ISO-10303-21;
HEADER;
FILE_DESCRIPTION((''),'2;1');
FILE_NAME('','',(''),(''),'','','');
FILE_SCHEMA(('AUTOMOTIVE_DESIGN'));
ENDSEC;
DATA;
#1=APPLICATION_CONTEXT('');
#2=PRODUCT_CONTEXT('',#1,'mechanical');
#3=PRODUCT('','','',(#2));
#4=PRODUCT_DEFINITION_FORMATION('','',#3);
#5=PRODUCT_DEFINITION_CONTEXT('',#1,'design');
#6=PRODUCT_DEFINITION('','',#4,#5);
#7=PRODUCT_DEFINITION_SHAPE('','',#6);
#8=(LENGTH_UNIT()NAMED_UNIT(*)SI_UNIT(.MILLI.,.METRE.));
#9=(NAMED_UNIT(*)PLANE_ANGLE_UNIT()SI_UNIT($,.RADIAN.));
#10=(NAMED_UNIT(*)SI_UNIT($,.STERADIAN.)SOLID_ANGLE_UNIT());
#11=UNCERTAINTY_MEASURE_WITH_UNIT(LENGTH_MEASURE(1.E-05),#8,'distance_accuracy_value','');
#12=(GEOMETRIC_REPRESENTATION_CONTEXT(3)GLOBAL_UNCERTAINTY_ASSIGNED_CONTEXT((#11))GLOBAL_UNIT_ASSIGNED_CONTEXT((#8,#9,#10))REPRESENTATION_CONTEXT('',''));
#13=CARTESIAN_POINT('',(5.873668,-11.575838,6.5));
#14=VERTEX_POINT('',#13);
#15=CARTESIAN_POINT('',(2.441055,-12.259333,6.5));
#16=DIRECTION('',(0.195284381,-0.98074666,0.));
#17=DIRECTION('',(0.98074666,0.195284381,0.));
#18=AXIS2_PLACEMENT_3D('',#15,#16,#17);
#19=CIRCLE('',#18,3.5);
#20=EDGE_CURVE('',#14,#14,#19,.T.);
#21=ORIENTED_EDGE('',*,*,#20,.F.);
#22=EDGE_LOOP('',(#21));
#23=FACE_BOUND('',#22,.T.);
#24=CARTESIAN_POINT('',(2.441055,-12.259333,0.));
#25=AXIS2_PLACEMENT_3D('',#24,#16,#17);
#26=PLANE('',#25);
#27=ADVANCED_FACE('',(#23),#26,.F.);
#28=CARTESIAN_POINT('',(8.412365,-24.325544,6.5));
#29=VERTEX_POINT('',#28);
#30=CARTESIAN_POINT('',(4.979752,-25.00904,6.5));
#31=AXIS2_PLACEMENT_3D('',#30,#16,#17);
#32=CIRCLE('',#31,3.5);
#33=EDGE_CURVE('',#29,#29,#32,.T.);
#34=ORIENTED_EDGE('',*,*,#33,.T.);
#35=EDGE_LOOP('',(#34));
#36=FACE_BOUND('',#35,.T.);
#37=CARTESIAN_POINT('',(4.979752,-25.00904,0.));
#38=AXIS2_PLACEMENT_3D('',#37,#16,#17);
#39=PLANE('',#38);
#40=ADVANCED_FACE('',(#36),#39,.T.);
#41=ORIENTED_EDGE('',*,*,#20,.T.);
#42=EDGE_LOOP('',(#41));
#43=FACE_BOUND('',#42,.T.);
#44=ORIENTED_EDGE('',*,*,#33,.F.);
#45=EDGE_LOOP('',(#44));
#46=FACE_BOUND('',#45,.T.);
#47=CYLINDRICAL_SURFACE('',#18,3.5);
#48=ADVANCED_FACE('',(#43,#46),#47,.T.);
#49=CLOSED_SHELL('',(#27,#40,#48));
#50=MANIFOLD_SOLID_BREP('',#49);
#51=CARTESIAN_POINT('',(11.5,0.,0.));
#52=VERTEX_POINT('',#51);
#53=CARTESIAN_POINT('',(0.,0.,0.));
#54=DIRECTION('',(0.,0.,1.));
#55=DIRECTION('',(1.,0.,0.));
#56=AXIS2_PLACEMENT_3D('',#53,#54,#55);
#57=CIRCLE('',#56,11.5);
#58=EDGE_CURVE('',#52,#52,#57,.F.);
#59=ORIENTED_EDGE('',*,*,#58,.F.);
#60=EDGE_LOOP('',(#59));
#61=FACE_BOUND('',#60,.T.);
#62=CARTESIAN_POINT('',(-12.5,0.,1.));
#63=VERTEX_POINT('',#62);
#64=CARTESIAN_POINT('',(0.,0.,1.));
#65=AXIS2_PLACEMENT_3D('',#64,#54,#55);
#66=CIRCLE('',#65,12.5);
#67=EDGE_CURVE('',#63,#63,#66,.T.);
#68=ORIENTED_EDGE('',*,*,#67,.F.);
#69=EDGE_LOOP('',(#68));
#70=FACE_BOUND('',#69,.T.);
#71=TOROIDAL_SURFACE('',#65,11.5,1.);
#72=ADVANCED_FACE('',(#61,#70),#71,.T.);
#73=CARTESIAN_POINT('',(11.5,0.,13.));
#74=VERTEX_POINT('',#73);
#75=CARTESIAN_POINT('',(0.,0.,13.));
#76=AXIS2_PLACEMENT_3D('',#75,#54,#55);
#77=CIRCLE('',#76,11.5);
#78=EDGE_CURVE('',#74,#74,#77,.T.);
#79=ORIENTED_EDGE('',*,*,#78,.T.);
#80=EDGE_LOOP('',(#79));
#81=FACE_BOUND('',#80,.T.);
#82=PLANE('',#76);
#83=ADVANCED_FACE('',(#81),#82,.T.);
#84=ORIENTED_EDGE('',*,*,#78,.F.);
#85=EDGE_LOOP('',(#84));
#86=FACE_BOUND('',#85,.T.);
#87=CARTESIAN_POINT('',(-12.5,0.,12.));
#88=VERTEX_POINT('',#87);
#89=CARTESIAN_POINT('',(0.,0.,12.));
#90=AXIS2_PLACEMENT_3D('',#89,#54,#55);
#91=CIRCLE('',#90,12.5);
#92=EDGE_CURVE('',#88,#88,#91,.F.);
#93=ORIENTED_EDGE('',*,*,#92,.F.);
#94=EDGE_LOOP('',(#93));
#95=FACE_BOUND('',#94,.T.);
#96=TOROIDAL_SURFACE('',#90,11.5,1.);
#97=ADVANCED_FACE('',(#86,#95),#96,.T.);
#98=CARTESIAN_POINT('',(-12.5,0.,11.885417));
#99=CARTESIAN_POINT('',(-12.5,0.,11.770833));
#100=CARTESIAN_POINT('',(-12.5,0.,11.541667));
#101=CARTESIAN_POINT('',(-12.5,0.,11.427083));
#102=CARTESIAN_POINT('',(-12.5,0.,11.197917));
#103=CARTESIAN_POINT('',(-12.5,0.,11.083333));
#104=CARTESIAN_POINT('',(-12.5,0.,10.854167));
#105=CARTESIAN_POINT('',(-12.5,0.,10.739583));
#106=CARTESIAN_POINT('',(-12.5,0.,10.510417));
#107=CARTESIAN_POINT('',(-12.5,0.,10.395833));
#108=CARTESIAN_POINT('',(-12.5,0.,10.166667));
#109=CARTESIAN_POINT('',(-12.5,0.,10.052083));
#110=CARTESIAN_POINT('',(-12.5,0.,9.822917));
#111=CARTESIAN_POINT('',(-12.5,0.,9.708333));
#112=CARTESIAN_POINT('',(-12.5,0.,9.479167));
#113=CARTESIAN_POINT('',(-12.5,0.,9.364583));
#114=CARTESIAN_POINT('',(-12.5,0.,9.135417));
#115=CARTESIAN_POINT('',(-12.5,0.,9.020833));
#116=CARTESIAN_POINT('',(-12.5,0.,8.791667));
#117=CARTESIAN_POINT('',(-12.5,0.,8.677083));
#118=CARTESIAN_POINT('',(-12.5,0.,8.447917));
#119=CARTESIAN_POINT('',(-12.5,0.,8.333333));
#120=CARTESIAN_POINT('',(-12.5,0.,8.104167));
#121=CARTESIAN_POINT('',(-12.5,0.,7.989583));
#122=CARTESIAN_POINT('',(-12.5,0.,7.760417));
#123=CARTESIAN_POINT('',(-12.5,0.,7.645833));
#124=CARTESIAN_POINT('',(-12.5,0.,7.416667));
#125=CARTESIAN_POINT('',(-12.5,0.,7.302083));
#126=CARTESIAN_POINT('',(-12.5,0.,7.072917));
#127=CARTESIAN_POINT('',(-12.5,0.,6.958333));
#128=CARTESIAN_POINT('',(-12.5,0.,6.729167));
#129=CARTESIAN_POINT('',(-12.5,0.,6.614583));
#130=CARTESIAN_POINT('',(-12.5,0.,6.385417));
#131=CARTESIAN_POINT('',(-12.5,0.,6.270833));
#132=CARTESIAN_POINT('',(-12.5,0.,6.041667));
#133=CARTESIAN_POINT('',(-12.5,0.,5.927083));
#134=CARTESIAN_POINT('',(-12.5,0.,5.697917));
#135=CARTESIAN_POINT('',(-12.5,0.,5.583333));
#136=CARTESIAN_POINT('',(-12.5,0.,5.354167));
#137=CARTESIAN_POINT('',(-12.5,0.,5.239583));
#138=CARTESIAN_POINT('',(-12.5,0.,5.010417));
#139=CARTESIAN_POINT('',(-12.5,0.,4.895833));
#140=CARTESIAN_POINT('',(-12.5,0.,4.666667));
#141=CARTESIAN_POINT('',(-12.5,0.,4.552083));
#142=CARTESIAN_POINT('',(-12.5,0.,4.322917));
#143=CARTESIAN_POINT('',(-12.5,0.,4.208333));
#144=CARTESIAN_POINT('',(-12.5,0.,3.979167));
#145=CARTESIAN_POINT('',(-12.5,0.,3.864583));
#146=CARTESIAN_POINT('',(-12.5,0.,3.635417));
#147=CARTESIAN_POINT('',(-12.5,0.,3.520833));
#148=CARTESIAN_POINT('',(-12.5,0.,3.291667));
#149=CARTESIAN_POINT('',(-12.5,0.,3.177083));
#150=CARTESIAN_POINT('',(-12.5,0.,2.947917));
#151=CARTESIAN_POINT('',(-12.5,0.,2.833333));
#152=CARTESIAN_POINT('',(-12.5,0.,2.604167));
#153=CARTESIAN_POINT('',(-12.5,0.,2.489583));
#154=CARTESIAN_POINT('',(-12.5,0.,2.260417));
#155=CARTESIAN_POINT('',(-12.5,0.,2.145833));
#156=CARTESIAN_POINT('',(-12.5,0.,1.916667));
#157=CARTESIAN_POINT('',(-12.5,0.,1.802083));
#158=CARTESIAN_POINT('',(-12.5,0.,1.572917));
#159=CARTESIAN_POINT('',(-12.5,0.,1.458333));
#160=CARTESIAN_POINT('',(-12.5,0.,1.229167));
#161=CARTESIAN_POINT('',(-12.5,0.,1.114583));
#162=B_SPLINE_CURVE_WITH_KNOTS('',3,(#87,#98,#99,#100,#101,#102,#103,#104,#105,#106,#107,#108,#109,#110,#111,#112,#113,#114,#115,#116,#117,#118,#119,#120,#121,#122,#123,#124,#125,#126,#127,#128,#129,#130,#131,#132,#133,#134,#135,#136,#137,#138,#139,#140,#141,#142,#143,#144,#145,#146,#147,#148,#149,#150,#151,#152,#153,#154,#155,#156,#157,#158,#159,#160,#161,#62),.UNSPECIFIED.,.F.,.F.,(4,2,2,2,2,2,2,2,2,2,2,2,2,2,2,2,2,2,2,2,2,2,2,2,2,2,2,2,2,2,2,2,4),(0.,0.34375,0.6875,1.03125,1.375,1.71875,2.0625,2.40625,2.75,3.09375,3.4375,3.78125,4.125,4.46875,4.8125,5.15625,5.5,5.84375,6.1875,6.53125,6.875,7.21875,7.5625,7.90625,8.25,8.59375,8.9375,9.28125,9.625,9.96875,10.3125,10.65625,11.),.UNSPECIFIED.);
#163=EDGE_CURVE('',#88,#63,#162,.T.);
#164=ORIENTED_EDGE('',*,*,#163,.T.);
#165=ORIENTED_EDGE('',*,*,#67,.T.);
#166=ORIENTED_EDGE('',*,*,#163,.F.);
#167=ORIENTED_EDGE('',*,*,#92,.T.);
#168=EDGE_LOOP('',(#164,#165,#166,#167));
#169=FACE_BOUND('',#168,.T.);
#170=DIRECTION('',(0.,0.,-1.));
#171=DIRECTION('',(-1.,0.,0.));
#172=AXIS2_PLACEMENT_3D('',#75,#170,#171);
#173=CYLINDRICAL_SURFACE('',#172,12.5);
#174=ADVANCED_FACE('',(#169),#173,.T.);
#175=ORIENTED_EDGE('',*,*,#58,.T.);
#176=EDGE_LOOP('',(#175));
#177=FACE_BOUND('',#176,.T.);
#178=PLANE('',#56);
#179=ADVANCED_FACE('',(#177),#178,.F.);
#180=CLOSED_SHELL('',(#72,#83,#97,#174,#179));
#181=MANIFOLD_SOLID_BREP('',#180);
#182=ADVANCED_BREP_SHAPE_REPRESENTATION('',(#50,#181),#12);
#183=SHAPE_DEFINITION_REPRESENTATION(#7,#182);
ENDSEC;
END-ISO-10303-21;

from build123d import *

# Parameters (mm, degrees)
ESQUISSE1_R            = 12.5
BOSS_EXTRU_1_DEPTH     = 13
BOSS_EXTRU_2_START     = 12.5
BOSS_EXTRU_2_OUTLINE_R = 3.5
BOSS_EXTRU_2_DEPTH     = 13
CONG_1_R               = 1


# Read off the part's stored shape, not the designer's step: Boss.-Extru.2
with BuildPart() as part:
    # Esquisse1 → Boss.-Extru.1 (new body)
    with BuildSketch(Plane.XY):
        with Locations(Location((0, 0, 0), (0, 0, 180))):
            Circle(ESQUISSE1_R)
    extrude(amount=BOSS_EXTRU_1_DEPTH)

    # Congé1
    cong_1_edges = [part.edges().sort_by_distance(p)[0] for p in [
        (12.5, 0, 0),
        (12.5, 0, 13),
    ]]
    fillet(cong_1_edges, radius=CONG_1_R)


with BuildPart() as body_2:
    # Boss.-Extru.2 outline → Boss.-Extru.2 (new body)
    with BuildSketch(Plane(origin=(0, 0, 0), x_dir=(0.9807466597819918, 0.19528438065156695, 0), z_dir=(0.19528438065156695, -0.9807466597819918, 0)).offset(BOSS_EXTRU_2_START)):
        with Locations((0, 6.5)):
            Circle(BOSS_EXTRU_2_OUTLINE_R)
    extrude(amount=BOSS_EXTRU_2_DEPTH)


solid = Compound([part.part, body_2.part])
